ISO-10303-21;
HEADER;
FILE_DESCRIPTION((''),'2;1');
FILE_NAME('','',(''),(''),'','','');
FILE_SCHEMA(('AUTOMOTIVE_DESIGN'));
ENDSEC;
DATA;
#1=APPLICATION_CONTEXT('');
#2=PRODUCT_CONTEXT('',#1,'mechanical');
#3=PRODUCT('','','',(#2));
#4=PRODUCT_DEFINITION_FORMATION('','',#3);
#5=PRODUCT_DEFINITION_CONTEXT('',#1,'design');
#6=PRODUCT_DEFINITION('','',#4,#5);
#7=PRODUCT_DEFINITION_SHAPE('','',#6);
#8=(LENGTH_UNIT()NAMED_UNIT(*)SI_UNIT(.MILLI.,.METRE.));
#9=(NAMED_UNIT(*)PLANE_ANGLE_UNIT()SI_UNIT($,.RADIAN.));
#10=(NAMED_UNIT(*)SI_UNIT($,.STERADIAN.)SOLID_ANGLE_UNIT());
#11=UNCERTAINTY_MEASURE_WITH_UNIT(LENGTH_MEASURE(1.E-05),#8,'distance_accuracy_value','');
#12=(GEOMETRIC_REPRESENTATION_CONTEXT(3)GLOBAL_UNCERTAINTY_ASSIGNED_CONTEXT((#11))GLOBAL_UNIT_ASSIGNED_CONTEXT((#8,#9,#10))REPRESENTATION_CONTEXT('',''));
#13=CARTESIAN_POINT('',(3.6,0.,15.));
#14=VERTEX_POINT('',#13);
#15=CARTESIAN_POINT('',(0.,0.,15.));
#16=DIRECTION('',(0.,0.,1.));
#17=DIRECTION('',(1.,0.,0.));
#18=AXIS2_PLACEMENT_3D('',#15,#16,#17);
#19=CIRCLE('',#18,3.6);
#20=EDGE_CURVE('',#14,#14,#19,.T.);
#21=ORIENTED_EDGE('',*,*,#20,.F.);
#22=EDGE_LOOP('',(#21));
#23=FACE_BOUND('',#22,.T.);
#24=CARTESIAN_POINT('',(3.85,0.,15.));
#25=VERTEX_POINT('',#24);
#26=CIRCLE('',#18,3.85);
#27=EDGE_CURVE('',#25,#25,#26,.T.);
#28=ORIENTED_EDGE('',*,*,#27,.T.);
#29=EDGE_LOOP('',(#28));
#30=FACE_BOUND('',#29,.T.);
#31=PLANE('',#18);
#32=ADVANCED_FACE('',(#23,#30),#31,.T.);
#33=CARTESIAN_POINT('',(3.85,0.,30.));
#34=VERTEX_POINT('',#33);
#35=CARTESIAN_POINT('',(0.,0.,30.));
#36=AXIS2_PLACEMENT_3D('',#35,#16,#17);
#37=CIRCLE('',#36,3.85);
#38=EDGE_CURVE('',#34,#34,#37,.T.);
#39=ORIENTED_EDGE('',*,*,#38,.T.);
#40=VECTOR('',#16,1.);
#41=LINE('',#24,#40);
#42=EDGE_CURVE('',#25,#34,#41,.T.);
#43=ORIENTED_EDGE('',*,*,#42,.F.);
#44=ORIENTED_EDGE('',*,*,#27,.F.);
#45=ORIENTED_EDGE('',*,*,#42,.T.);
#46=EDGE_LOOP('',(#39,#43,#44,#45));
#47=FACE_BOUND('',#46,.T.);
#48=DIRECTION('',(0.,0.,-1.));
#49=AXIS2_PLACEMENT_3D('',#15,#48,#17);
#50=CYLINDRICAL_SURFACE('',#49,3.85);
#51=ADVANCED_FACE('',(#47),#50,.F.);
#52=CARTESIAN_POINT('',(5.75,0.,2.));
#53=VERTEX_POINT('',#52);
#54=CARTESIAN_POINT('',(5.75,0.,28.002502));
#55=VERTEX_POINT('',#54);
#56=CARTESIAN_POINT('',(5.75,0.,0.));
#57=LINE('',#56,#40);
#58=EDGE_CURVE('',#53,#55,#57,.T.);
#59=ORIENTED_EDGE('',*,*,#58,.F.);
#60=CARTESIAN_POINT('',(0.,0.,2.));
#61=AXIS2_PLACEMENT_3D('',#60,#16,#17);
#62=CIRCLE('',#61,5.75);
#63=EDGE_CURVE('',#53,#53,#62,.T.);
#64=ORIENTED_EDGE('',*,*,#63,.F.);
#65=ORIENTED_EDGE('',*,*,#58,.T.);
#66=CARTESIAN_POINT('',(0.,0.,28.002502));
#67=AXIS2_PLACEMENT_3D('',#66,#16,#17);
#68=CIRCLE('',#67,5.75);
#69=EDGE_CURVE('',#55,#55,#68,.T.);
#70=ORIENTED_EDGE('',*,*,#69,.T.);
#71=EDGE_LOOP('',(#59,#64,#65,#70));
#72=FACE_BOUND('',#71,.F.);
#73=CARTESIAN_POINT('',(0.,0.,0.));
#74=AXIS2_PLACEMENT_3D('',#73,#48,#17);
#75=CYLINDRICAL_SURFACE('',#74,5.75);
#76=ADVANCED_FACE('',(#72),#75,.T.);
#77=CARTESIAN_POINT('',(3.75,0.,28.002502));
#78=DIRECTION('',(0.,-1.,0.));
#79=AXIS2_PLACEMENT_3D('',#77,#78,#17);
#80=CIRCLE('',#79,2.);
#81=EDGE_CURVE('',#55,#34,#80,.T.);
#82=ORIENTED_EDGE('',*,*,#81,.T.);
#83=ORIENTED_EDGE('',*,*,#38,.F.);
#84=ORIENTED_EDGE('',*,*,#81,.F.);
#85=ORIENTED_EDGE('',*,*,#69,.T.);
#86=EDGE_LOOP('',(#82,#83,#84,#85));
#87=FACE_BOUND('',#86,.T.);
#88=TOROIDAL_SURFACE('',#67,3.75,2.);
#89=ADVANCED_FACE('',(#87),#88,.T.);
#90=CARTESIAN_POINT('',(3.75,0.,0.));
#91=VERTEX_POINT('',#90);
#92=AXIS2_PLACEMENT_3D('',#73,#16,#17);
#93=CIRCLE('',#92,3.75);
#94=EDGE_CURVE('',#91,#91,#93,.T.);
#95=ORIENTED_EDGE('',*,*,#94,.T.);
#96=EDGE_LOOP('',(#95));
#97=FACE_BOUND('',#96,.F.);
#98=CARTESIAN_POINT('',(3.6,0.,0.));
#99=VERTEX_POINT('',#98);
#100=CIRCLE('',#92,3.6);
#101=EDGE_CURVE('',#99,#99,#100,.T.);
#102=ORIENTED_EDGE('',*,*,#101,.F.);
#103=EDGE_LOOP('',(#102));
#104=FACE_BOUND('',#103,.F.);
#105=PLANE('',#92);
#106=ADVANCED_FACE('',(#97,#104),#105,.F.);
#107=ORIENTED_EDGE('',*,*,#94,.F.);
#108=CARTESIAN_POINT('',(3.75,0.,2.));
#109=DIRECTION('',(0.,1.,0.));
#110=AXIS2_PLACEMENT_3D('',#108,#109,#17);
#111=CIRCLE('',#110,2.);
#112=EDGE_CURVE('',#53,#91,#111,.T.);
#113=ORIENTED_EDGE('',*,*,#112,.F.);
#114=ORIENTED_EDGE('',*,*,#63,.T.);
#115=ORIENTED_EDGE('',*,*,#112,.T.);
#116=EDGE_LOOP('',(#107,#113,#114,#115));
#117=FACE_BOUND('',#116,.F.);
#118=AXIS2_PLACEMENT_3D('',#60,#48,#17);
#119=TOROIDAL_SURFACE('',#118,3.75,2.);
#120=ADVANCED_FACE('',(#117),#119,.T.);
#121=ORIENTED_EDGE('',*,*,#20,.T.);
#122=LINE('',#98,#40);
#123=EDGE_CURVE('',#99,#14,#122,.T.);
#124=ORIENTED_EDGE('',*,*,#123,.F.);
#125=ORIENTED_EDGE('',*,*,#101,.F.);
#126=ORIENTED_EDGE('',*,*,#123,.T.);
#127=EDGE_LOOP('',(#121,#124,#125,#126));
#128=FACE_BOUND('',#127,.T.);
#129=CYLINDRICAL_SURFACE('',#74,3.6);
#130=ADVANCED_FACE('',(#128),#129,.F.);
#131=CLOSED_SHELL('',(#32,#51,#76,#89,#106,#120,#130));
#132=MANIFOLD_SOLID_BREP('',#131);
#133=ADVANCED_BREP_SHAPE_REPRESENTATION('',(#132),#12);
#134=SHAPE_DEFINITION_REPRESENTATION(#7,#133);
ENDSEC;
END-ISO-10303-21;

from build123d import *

# Parameters (mm, degrees)
F0_R     = 5.75
F0_R_2   = 3.85
F0_R_3   = 3.6
F1_DEPTH = 30
F2_DEPTH = 15
F3_START = 15
F3_DEPTH = 15


# Not quite as in the source:
# - a fillet or chamfer that OpenCascade refuses, or shapes differently, is made with other operations: its cross-section is extruded or revolved along the edge and cut away or added
# - a feature names something its author has since deleted; it is built from what else it names


with BuildPart() as f1:
    # F0 (on Top) → F1 (new body)
    with BuildSketch(Plane.XY):
        Circle(F0_R)
        Circle(F0_R_2, mode=Mode.SUBTRACT)
        Circle(F0_R_2)
        Circle(F0_R_3, mode=Mode.SUBTRACT)
        Circle(F0_R_3)
    extrude(amount=F1_DEPTH)

    # F0 (on Top) → F2 (cut)
    with BuildSketch(Plane.XY):
        Circle(F0_R_3)
    extrude(amount=F2_DEPTH, mode=Mode.SUBTRACT)

    # F0 (on Top) → F3 (cut)
    with BuildSketch(Plane.XY.offset(F3_START)):
        Circle(F0_R_2)
        Circle(F0_R_3, mode=Mode.SUBTRACT)
        Circle(F0_R_3)
    extrude(amount=F3_DEPTH, mode=Mode.SUBTRACT)

    # F4: fillet of radius 2 on 2 edges, made by hand

    # F4_s1 → F4_t2 (revolve, cut)
    with BuildSketch(Plane.XZ):
        with BuildLine():
            ThreePointArc((5.75, 28.0025015645), (5.1991376746, 29.3809064397), (3.85, 30))
            Line((3.85, 30), (5.75, 30))
            Line((5.75, 30), (5.75, 28.0025015645))
        make_face()
    revolve(axis=Axis((0, 0, 30), (0, 0, 1)), mode=Mode.SUBTRACT)

    # F4_s3 → F4_t4 (revolve, cut)
    with BuildSketch(Plane.XZ):
        with BuildLine():
            ThreePointArc((5.75, 2), (5.1642135624, 0.5857864376), (3.75, 0))
            Line((3.75, 0), (5.75, 0))
            Line((5.75, 0), (5.75, 2))
        make_face()
    revolve(axis=Axis((0, 0, 0), (0, 0, 1)), mode=Mode.SUBTRACT)


solid = f1.part
